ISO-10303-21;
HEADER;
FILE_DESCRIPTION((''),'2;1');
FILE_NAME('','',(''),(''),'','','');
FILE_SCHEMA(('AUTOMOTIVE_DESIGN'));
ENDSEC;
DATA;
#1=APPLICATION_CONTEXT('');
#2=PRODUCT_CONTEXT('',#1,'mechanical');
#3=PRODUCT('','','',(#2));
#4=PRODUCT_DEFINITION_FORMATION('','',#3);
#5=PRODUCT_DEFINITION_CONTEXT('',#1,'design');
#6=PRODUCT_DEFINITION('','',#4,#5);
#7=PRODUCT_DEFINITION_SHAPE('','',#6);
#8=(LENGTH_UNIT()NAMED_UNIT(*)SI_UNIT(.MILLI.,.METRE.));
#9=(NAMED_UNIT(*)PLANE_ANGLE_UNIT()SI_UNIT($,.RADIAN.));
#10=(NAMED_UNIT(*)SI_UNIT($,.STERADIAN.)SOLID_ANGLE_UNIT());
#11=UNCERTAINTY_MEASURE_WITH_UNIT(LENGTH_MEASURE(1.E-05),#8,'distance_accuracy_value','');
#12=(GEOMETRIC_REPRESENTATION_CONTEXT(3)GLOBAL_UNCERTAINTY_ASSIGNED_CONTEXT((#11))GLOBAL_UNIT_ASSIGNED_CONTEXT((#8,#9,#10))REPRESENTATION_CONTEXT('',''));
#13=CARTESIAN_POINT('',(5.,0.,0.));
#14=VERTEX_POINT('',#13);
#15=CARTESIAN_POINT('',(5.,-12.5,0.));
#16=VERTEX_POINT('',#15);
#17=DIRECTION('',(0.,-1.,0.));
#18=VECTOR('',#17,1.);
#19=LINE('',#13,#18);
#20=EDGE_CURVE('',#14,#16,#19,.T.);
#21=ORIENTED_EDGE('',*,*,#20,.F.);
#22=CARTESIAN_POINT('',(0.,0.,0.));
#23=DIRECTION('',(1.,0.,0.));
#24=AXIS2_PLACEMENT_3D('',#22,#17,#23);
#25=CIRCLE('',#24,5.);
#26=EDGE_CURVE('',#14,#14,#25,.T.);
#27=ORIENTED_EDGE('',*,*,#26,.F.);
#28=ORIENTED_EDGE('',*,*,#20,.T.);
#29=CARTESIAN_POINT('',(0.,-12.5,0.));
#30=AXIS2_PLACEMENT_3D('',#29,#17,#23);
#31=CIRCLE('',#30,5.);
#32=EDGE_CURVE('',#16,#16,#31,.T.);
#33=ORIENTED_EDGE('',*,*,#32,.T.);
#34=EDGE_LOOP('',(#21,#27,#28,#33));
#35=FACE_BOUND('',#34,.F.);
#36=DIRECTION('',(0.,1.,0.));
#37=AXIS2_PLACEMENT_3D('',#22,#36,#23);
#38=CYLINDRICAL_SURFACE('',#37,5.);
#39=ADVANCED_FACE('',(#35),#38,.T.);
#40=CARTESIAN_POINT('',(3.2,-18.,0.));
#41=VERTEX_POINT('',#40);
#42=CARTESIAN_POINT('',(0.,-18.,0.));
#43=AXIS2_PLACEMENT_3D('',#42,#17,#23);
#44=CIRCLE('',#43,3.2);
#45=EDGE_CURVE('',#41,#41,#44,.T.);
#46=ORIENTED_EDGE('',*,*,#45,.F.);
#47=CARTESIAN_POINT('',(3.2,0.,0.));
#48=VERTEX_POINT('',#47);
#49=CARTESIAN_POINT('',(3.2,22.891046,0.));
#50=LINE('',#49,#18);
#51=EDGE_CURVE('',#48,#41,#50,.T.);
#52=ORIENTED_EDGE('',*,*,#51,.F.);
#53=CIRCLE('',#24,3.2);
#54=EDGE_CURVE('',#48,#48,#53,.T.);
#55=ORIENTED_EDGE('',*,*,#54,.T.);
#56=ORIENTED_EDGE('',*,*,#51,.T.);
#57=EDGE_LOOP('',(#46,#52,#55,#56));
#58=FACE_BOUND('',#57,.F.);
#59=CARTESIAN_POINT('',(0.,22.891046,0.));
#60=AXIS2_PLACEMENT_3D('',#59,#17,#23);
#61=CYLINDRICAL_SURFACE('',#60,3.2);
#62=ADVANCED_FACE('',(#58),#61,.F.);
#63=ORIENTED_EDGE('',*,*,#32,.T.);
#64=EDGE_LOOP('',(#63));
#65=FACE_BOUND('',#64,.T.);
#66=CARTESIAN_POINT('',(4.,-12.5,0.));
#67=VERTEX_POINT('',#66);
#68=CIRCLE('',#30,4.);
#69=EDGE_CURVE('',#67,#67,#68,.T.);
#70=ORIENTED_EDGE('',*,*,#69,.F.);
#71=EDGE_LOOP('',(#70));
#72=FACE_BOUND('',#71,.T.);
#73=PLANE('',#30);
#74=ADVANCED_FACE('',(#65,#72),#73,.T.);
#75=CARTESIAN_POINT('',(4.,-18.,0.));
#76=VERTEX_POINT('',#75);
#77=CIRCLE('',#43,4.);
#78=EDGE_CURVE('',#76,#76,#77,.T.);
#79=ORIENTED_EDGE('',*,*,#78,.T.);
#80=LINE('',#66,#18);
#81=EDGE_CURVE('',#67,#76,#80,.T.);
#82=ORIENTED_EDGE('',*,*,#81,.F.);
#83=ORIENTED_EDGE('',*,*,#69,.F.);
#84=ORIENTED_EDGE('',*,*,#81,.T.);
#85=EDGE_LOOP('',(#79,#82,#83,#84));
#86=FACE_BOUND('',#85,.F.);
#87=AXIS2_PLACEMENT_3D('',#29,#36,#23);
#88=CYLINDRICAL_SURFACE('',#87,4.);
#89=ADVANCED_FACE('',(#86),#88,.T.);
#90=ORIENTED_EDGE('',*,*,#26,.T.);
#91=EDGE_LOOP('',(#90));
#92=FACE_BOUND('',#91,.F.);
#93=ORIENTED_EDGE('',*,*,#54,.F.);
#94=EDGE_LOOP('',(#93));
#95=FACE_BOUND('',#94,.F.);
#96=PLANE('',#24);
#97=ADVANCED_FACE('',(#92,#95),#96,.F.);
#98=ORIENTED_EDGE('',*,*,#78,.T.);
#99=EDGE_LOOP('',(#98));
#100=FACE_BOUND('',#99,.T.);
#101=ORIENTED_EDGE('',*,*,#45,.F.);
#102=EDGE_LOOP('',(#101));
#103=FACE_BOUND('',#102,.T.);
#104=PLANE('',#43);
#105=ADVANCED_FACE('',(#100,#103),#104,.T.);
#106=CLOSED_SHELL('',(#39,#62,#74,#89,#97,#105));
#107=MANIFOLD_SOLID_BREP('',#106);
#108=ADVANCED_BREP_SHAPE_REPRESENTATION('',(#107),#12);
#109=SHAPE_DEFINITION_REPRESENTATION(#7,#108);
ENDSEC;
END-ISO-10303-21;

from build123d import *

# Parameters (mm, degrees)
F0_R     = 5
F1_DEPTH = 12.5
F2_R     = 4
F3_DEPTH = 5.5
F5_D     = 6.4


with BuildPart() as f1:
    # F0 (on Front) → F1 (new body)
    with BuildSketch(Plane.XZ):
        Circle(F0_R)
    extrude(amount=F1_DEPTH)

    # F2 (on face) → F3 (join)
    with BuildSketch(Plane.XZ.offset(12.5)):
        Circle(F2_R)
    extrude(amount=F3_DEPTH)

    # F5 (through all)
    with Locations(Plane(origin=(0, 0, 0), x_dir=(-1, 0, 0), z_dir=(0, 1, 0))):
        with Locations((0, 0)):
            Hole(F5_D / 2)


solid = f1.part
